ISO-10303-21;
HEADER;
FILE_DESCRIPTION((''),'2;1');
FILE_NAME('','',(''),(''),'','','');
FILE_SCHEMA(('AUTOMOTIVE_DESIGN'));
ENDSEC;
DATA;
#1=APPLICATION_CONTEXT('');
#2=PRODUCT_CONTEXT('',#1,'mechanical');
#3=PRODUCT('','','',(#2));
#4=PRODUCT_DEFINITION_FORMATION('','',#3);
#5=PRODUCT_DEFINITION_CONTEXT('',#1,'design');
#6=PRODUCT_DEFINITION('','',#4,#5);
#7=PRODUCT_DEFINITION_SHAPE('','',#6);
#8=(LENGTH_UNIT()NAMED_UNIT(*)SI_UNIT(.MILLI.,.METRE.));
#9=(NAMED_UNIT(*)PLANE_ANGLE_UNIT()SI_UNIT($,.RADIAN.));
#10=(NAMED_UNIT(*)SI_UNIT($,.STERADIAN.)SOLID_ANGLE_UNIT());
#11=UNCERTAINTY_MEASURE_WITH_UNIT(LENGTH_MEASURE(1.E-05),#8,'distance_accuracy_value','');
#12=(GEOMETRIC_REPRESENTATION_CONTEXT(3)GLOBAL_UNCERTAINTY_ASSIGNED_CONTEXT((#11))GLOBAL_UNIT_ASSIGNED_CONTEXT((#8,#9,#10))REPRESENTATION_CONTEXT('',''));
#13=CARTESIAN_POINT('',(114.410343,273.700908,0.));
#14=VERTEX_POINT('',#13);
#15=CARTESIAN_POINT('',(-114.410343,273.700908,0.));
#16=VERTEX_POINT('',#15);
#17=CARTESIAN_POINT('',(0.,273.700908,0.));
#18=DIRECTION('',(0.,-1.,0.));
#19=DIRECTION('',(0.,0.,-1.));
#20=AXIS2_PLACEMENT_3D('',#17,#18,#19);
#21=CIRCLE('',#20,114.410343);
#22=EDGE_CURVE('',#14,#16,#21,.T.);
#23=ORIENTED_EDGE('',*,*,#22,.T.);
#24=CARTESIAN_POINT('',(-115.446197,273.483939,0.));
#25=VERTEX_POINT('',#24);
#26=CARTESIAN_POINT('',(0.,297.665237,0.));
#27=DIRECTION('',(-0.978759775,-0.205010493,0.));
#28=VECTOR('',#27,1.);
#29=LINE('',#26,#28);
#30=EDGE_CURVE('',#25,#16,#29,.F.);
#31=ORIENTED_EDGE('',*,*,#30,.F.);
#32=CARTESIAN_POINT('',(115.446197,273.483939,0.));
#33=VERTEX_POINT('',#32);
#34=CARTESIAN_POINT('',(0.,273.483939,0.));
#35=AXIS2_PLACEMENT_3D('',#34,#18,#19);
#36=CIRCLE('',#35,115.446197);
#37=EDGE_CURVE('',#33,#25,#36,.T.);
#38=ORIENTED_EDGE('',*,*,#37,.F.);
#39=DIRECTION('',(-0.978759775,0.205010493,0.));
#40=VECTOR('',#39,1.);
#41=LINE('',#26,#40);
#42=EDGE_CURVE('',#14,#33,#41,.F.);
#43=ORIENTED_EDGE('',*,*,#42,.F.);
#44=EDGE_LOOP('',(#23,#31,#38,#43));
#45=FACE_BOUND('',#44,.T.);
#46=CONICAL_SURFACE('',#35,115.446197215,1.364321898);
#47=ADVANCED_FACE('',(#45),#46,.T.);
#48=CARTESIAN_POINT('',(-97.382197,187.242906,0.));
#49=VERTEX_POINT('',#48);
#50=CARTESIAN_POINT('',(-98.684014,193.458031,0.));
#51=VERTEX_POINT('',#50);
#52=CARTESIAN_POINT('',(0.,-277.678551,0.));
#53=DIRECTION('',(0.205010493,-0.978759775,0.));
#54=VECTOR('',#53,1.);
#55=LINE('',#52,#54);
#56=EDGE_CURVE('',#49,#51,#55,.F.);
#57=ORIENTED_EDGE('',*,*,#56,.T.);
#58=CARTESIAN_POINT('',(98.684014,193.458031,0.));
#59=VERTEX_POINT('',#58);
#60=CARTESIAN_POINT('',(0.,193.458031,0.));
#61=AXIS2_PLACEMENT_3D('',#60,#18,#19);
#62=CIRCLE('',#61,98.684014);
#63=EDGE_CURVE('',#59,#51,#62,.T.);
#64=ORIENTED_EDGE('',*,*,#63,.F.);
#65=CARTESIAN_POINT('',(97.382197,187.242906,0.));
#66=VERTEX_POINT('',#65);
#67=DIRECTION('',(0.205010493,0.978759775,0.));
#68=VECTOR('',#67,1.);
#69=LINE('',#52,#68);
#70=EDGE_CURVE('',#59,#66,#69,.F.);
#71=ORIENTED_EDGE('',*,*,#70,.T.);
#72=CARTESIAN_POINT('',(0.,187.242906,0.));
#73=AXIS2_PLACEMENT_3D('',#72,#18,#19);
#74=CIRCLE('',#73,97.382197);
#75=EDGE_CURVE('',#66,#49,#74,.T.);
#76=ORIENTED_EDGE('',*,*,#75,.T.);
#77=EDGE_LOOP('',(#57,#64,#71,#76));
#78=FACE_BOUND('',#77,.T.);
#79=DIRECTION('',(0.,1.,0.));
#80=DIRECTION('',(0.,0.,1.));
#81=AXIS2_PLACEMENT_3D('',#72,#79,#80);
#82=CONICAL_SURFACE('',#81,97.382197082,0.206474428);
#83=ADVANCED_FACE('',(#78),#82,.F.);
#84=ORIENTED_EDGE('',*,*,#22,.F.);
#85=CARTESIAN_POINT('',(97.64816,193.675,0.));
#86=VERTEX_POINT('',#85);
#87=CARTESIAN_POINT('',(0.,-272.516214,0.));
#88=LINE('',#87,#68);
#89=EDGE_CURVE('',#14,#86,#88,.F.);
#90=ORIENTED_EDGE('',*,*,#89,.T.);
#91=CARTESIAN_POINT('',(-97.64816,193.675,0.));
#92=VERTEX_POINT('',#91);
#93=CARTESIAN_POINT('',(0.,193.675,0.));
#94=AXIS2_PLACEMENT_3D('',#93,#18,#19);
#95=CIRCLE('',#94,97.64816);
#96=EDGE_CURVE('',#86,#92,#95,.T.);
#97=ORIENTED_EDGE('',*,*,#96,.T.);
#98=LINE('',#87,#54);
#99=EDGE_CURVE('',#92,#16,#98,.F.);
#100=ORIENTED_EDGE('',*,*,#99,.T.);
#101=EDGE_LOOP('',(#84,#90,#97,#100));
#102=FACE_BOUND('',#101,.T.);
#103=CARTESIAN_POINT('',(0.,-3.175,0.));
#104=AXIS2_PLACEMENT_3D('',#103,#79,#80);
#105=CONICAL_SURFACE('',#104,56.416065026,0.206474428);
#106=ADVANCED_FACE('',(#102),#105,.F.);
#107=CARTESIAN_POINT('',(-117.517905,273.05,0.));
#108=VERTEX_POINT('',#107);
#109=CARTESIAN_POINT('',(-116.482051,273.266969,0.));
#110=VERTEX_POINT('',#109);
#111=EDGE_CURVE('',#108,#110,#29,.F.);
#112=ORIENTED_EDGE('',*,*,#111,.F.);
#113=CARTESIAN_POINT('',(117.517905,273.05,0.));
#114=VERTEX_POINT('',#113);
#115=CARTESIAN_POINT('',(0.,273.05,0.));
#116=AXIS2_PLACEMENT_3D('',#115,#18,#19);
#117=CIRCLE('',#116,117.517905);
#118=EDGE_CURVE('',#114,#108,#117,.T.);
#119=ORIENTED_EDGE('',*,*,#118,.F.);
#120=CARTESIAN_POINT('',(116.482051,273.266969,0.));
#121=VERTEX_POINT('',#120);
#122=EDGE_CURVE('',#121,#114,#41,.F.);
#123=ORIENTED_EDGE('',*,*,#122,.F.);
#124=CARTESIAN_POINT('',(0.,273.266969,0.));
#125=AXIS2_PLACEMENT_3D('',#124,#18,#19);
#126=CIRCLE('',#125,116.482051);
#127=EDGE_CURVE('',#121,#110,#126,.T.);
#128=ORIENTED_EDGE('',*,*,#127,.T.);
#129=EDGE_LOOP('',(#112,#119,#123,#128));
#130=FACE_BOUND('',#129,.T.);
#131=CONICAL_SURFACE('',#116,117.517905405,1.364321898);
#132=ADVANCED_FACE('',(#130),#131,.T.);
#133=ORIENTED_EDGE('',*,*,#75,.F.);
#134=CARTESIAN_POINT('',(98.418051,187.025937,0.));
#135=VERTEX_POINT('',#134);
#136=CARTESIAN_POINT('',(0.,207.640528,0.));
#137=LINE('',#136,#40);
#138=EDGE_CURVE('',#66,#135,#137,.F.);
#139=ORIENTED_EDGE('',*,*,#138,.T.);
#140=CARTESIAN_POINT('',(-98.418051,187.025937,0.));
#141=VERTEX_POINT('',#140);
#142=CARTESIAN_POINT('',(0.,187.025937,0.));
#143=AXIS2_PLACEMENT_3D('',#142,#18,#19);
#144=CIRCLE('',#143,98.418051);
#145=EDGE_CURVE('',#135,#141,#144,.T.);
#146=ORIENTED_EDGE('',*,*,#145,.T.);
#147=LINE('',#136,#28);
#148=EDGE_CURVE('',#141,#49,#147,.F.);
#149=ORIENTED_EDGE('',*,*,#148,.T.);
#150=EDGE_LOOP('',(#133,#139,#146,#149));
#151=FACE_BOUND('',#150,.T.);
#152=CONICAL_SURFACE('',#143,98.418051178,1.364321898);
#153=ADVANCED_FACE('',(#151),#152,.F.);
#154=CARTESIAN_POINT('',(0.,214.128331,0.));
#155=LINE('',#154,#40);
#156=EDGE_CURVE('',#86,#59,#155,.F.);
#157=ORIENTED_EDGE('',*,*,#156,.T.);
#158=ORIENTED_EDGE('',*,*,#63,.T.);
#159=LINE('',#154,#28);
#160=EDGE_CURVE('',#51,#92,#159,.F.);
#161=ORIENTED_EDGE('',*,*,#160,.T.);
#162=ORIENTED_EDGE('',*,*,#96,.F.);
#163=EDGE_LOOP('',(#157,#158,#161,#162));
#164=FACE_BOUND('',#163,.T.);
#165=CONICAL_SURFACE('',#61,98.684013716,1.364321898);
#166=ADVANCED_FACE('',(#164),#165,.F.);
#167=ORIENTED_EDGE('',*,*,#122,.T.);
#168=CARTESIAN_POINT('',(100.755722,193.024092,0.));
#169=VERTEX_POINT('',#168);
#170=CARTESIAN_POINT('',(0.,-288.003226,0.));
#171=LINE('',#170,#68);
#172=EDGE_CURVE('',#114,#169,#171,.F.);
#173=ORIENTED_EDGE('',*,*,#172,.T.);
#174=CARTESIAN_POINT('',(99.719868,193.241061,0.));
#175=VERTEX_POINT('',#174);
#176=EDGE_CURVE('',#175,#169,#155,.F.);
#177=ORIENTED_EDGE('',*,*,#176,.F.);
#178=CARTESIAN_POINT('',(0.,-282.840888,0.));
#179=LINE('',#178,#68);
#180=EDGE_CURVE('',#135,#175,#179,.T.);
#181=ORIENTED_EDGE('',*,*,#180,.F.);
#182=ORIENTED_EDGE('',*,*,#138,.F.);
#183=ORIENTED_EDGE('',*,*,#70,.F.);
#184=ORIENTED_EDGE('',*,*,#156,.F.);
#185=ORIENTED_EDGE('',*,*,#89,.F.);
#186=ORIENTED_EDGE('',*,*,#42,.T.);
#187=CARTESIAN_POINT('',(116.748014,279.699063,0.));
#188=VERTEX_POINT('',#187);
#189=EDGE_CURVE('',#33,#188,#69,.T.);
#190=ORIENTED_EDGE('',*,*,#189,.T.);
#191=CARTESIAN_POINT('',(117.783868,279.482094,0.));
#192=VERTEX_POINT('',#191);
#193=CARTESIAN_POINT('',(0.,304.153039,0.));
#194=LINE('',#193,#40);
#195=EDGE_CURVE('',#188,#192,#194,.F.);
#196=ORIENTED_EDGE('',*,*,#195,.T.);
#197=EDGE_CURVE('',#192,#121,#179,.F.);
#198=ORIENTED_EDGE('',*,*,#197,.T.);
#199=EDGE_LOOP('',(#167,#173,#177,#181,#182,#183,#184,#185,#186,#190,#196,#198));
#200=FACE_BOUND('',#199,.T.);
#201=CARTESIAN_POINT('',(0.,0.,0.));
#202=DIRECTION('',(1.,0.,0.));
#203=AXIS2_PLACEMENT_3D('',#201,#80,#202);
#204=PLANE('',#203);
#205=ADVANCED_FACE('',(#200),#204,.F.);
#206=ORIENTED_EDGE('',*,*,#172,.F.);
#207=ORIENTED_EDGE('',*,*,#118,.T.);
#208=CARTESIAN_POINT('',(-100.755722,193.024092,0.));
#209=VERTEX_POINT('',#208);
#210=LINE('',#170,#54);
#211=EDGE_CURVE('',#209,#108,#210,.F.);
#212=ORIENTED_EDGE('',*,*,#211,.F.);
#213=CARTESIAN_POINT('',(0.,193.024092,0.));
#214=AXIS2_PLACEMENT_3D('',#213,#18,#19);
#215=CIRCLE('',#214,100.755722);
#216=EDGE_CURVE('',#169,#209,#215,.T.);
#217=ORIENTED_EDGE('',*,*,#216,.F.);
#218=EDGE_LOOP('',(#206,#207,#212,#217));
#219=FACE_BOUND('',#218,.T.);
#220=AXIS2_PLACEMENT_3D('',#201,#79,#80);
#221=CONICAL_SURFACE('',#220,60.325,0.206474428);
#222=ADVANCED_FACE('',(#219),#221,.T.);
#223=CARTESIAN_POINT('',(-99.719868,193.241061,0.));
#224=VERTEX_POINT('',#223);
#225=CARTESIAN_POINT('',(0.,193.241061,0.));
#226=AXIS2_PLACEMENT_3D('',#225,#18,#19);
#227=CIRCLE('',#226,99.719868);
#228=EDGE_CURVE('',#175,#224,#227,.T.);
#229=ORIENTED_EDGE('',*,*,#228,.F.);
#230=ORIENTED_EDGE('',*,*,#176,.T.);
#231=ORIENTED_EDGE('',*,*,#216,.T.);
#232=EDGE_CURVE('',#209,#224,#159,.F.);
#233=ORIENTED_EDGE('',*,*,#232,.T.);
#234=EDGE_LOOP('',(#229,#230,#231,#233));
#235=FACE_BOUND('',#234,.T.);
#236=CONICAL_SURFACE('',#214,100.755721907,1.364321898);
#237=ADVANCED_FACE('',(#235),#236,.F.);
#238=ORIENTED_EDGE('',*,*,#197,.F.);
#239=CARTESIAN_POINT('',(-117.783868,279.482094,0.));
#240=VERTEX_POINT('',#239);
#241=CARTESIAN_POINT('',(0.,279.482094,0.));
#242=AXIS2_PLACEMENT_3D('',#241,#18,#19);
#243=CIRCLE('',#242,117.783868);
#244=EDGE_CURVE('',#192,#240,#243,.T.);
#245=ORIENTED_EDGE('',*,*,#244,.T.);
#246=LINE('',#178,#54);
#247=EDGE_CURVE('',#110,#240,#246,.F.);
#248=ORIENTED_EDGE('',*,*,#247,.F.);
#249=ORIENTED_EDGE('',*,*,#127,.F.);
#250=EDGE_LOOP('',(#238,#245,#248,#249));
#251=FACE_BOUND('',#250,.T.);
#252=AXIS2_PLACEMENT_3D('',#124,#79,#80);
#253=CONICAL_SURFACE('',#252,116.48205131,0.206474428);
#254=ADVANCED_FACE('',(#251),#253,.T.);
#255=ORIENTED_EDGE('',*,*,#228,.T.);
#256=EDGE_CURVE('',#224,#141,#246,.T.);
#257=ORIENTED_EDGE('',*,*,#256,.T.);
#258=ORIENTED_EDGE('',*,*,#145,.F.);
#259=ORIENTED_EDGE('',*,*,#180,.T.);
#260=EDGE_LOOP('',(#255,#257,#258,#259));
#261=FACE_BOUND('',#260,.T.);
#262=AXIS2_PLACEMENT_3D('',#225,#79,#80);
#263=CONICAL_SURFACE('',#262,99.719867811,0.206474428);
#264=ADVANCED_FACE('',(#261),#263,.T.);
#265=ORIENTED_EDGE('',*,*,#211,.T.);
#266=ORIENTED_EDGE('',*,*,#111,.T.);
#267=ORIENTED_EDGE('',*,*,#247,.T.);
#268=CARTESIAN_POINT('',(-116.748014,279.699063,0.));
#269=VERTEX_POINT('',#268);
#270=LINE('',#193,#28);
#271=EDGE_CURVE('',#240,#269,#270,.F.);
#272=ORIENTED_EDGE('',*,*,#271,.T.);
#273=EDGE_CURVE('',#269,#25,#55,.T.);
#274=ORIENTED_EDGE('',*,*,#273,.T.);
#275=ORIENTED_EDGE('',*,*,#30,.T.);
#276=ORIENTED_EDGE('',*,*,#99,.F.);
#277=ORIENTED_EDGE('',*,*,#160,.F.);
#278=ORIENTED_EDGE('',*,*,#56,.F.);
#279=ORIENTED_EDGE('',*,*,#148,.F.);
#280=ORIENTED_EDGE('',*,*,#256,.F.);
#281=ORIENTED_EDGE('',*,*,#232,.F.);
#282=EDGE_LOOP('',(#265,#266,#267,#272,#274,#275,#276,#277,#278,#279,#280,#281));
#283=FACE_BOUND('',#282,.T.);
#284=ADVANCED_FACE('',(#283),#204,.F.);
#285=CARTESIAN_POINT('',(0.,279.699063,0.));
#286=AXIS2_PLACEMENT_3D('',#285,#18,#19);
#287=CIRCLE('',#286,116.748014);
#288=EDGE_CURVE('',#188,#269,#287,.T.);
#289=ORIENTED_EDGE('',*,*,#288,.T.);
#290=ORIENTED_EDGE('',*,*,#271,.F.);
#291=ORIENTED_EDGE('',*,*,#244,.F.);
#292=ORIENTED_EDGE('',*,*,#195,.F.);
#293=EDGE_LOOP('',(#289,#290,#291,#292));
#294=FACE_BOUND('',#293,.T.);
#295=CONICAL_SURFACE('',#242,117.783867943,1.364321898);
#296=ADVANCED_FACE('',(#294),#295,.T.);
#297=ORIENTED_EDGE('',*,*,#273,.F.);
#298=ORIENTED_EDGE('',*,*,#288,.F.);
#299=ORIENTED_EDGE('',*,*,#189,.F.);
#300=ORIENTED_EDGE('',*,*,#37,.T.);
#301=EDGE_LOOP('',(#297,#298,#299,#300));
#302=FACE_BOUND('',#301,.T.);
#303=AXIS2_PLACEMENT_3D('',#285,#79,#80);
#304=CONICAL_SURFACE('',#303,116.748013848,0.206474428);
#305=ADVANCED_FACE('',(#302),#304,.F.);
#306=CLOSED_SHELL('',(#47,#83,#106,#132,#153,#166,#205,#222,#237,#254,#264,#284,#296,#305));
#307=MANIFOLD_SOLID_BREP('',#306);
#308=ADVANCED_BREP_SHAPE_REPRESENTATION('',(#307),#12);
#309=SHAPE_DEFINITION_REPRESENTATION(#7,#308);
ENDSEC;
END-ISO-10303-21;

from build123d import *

# Parameters (mm, degrees)
RIB5_START          = -1.5875
RIB5_DEPTH          = 3.175
CIRPATTERN1_COUNT   = 4
BOSS_EXTRUDE1_REACH = 604.818
SKETCH4_R           = 50.8
SKETCH4_R_2         = 44.45
SKETCH4_3_R         = 44.45
CUT_EXTRUDE1_DEPTH  = 155.575
SKETCH16_R          = 47.625
SKETCH16_R_2        = 44.45
CUT_EXTRUDE8_DEPTH  = 165.1
BOSS_EXTRUDE2_START = 127
SKETCH10_R          = 53.975
SKETCH10_R_2        = 50.8
BOSS_EXTRUDE2_DEPTH = 127
RIB10_START         = -3.175
RIB10_DEPTH         = 3.175
SKETCH12_R          = 50.8
CUT_EXTRUDE4_DEPTH  = 9.525
SKETCH17_R          = 3.175
CUT_EXTRUDE9_DEPTH  = 3.175
SKETCH18_W          = 50.8
SKETCH18_H          = 130.175
SKETCH19_W          = 254
SKETCH19_H          = 114.3
CUT_EXTRUDE10_DEPTH = 326.542078986


with BuildPart() as part:
    # Sketch1 → Revolve-Thin1 (revolve)
    with BuildSketch(Plane.XY, mode=Mode.PRIVATE) as revolve_thin1_sk:
        Polygon((-104.775, 0), (-60.325, 0), (-158.75, 469.9), (-50.8, 469.9), (-50.8, 466.725), (-154.841065026, 466.725), (-56.416065026, -3.175), (-104.775, -3.175), align=None)
    revolve(revolve_thin1_sk.sketch.rotate(Axis((0, 0, 0), (0, 1, 0)), 270), axis=Axis((0, 0, 0), (0, 1, 0)))

    # Rib5: read off the stored shape, not the designer's step
    # Rib5 outline → Rib5 (add)
    with BuildSketch(Plane(origin=(0, 0, 0), x_dir=(0, 0, -1), z_dir=(1, 0, 0)).offset(RIB5_START)):
        with BuildLine():
            add(Edge.make_bspline(
                [(-60.304108235, -2e-09), (-60.337817831, 0.160880416), (-60.371527408, 0.321760839), (-62.968360223, 12.715265359), (-65.531376886, 24.947911788), (-71.07360722, 51.400397829), (-74.052795216, 65.620242821), (-77.031911205, 79.840102899)],
                knots=[1388.368707512, 1388.368707512, 1388.368707512, 1388.368707512, 1388.861829823, 1388.861829823, 1426.356632629, 1426.356632629, 1469.942363945, 1469.942363945, 1469.942363945, 1469.942363945], degree=3))
            Line((-77.031911205, 79.840102899), (-98.425, 0))
            Line((-98.425, 0), (-60.304108235, -2e-09))
        make_face()
    rib5 = extrude(amount=RIB5_DEPTH)

    # CirPattern1: Rib5 ×4 about axis
    cirpattern1_axis = Axis((0, 0, 0), (0, 1, 0))
    for i in range(1, CIRPATTERN1_COUNT):
        add(rib5.rotate(cirpattern1_axis, i * 360 / CIRPATTERN1_COUNT))

    # Sketch4 → Boss-Extrude1 (add, up to next)
    with BuildSketch(Plane(origin=(0, 41.317067623, 234.320734449), x_dir=(-1, 0, 0), z_dir=(0, 0.17364817766693072, 0.984807753012208)), mode=Mode.PRIVATE) as boss_extrude1_sk1:
        with Locations(Location((-89.350924276, -380.21116314, 0), (0, 0, 90))):
            Circle(SKETCH4_R)
        with Locations(Location((-89.350924276, -380.21116314, 0), (0, 0, 90))):
            Circle(SKETCH4_R_2, mode=Mode.SUBTRACT)
    boss_extrude1_tool1 = extrude(boss_extrude1_sk1.sketch, amount=-BOSS_EXTRUDE1_REACH, mode=Mode.PRIVATE) - part.part
    add(boss_extrude1_tool1.solids().sort_by_distance((89.350924, 464.365191, 159.725936))[0])

    # Sketch4<3> → Cut-Extrude1 (cut)
    with BuildSketch(Plane(origin=(0, 41.317067623, 234.320734449), x_dir=(-1, 0, 0), z_dir=(0, 0.17364817766693072, 0.984807753012208))):
        with Locations(Location((-89.350924276, -380.21116314, 0), (0, 0, 90))):
            Circle(SKETCH4_3_R)
    extrude(amount=-CUT_EXTRUDE1_DEPTH, mode=Mode.SUBTRACT)

    # Sketch16 → Cut-Extrude8 (cut)
    # profile 1 of 2: a face of its own
    with BuildSketch(Plane(origin=(0, 41.317067623, 234.320734449), x_dir=(1, 0, 0), z_dir=(0, 0.17364817766693058, 0.9848077530122081))):
        with Locations(Location((89.350924276, 380.21116314, 0), (0, 0, 270))):
            Circle(SKETCH16_R)
        with Locations((89.350924276, 380.21116314)):
            Circle(SKETCH16_R_2, mode=Mode.SUBTRACT)
    # profile 2 of 2: a face of its own
    with BuildSketch(Plane(origin=(0, 41.317067623, 234.320734449), x_dir=(1, 0, 0), z_dir=(0, 0.17364817766693058, 0.9848077530122081))):
        with Locations((89.350924276, 380.21116314)):
            Circle(SKETCH16_R_2)
    extrude(amount=-CUT_EXTRUDE8_DEPTH, mode=Mode.SUBTRACT)

    # Sketch10 → Boss-Extrude2 (add)
    with BuildSketch(Plane.XZ.offset(-466.725).offset(BOSS_EXTRUDE2_START)):
        with Locations(Location((0, 0, 0), (0, 0, 90))):
            Circle(SKETCH10_R)
        with Locations(Location((0, 0, 0), (0, 0, 270))):
            Circle(SKETCH10_R_2, mode=Mode.SUBTRACT)
    extrude(amount=-BOSS_EXTRUDE2_DEPTH)

    # Rib10: read off the stored shape, not the designer's step
    # Rib10 outline → Rib10 (add)
    with BuildSketch(Plane(origin=(41.275, 0, 0), x_dir=(0, 0, -1), z_dir=(1, 0, 0)).offset(RIB10_START)):
        with BuildLine():
            Line((-129.397511049, 371.475000111), (-34.780382402, 371.475))
            Line((-34.780382402, 371.475), (-34.780382402, 466.725))
            Line((-34.780382402, 466.725), (-150.08046179, 466.725000293))
            add(Edge.make_bspline(
                [(-129.397511049, 371.475000111), (-129.621022333, 372.498635621), (-129.844489601, 373.522280745), (-132.947477272, 387.73914033), (-135.819852259, 400.933914587), (-140.797597402, 423.849651078), (-142.905681683, 433.570024076), (-146.702544816, 451.101957641), (-148.392325081, 458.913301347), (-150.08046179, 466.725000293)],
                knots=[195.059408085, 195.059408085, 195.059408085, 195.059408085, 198.202667885, 198.202667885, 238.714059285, 238.714059285, 268.553076365, 268.553076365, 292.529147638, 292.529147638, 292.529147638, 292.529147638], degree=3))
        make_face()
    extrude(amount=RIB10_DEPTH)

    # Sketch12 → Cut-Extrude4 (cut)
    with BuildSketch(Plane(origin=(0, 41.317067623, 234.320734449), x_dir=(1, 0, 0), z_dir=(0, 0.17364817766693058, 0.9848077530122081))):
        with Locations(Location((89.350924276, 380.21116314, 0), (0, 0, 270))):
            Circle(SKETCH12_R)
    extrude(amount=-CUT_EXTRUDE4_DEPTH, mode=Mode.SUBTRACT)

    # Sketch17 → Cut-Extrude9 (cut)
    with BuildSketch(Plane.XZ.offset(3.175)):
        with Locations(Location((-62.861792847, 62.861792847, 0), (0, 0, 270))):
            Circle(SKETCH17_R)
        with Locations(Location((-34.020557137, 82.13289044, 0), (0, 0, 270))):
            Circle(SKETCH17_R)
        with Locations(Location((34.020557137, 82.13289044, 0), (0, 0, 270))):
            Circle(SKETCH17_R)
        with Locations(Location((62.861792847, 62.861792847, 0), (0, 0, 270))):
            Circle(SKETCH17_R)
        with Locations(Location((82.13289044, 34.020557137, 0), (0, 0, 270))):
            Circle(SKETCH17_R)
        with Locations(Location((82.13289044, -34.020557137, 0), (0, 0, 270))):
            Circle(SKETCH17_R)
        with Locations(Location((62.861792847, -62.861792847, 0), (0, 0, 270))):
            Circle(SKETCH17_R)
        with Locations(Location((34.020557137, -82.13289044, 0), (0, 0, 270))):
            Circle(SKETCH17_R)
        with Locations(Location((-34.020557137, -82.13289044, 0), (0, 0, 270))):
            Circle(SKETCH17_R)
        with Locations(Location((-62.861792847, -62.861792847, 0), (0, 0, 270))):
            Circle(SKETCH17_R)
        with Locations(Location((-82.13289044, -34.020557137, 0), (0, 0, 270))):
            Circle(SKETCH17_R)
        with Locations(Location((-82.13289044, 34.020557137, 0), (0, 0, 270))):
            Circle(SKETCH17_R)
    extrude(amount=-CUT_EXTRUDE9_DEPTH, mode=Mode.SUBTRACT)

    # Sketch18 → Cut-Revolve2 (revolve, cut)
    with BuildSketch(Plane.XY, mode=Mode.PRIVATE) as cut_revolve2_sk:
        Polygon((-114.410343119, 273.700908317), (-154.841065026, 466.725), (-56.416065026, 339.725), (-53.975, 339.725), (-50.8, 339.725), (-50.8, 469.9), (-158.75, 469.9), (-117.517905405, 273.05), (-116.48205131, 273.266969439), (-117.783867943, 279.482094012), (-116.748013848, 279.69906345), (-115.446197215, 273.483938878), align=None)
        Polygon((-56.416065026, -3.175), (-97.64815962, 193.675), (-98.684013716, 193.458030561), (-97.382197082, 187.242905988), (-98.418051178, 187.02593655), (-99.719867811, 193.241061122), (-100.755721907, 193.024091683), (-77.041088772, 79.805843168), (-98.425, 0), (-104.775, 0), (-104.775, -3.175), align=None)
        with Locations((-25.4, 404.8125)):
            Rectangle(SKETCH18_W, SKETCH18_H)
    revolve(cut_revolve2_sk.sketch.rotate(Axis((0, 0, 0), (0, 1, 0)), 270), axis=Axis((0, 0, 0), (0, 1, 0)), mode=Mode.SUBTRACT)


with BuildPart() as cut_revolve2_kept_piece:
    # of the separate pieces the step leaves, the one the design keeps (cut_revolve2_pieces_kept)
    add(part.part.solids().sort_by_distance((0, 193.024091683, -100.755721907))[0])

    # Sketch19 → Cut-Extrude10 (cut, through all)
    with BuildSketch(Plane.XY):
        with Locations((0, 233.254015281)):
            Rectangle(SKETCH19_W, SKETCH19_H)
    extrude(amount=-CUT_EXTRUDE10_DEPTH, mode=Mode.SUBTRACT)


solid = cut_revolve2_kept_piece.part
